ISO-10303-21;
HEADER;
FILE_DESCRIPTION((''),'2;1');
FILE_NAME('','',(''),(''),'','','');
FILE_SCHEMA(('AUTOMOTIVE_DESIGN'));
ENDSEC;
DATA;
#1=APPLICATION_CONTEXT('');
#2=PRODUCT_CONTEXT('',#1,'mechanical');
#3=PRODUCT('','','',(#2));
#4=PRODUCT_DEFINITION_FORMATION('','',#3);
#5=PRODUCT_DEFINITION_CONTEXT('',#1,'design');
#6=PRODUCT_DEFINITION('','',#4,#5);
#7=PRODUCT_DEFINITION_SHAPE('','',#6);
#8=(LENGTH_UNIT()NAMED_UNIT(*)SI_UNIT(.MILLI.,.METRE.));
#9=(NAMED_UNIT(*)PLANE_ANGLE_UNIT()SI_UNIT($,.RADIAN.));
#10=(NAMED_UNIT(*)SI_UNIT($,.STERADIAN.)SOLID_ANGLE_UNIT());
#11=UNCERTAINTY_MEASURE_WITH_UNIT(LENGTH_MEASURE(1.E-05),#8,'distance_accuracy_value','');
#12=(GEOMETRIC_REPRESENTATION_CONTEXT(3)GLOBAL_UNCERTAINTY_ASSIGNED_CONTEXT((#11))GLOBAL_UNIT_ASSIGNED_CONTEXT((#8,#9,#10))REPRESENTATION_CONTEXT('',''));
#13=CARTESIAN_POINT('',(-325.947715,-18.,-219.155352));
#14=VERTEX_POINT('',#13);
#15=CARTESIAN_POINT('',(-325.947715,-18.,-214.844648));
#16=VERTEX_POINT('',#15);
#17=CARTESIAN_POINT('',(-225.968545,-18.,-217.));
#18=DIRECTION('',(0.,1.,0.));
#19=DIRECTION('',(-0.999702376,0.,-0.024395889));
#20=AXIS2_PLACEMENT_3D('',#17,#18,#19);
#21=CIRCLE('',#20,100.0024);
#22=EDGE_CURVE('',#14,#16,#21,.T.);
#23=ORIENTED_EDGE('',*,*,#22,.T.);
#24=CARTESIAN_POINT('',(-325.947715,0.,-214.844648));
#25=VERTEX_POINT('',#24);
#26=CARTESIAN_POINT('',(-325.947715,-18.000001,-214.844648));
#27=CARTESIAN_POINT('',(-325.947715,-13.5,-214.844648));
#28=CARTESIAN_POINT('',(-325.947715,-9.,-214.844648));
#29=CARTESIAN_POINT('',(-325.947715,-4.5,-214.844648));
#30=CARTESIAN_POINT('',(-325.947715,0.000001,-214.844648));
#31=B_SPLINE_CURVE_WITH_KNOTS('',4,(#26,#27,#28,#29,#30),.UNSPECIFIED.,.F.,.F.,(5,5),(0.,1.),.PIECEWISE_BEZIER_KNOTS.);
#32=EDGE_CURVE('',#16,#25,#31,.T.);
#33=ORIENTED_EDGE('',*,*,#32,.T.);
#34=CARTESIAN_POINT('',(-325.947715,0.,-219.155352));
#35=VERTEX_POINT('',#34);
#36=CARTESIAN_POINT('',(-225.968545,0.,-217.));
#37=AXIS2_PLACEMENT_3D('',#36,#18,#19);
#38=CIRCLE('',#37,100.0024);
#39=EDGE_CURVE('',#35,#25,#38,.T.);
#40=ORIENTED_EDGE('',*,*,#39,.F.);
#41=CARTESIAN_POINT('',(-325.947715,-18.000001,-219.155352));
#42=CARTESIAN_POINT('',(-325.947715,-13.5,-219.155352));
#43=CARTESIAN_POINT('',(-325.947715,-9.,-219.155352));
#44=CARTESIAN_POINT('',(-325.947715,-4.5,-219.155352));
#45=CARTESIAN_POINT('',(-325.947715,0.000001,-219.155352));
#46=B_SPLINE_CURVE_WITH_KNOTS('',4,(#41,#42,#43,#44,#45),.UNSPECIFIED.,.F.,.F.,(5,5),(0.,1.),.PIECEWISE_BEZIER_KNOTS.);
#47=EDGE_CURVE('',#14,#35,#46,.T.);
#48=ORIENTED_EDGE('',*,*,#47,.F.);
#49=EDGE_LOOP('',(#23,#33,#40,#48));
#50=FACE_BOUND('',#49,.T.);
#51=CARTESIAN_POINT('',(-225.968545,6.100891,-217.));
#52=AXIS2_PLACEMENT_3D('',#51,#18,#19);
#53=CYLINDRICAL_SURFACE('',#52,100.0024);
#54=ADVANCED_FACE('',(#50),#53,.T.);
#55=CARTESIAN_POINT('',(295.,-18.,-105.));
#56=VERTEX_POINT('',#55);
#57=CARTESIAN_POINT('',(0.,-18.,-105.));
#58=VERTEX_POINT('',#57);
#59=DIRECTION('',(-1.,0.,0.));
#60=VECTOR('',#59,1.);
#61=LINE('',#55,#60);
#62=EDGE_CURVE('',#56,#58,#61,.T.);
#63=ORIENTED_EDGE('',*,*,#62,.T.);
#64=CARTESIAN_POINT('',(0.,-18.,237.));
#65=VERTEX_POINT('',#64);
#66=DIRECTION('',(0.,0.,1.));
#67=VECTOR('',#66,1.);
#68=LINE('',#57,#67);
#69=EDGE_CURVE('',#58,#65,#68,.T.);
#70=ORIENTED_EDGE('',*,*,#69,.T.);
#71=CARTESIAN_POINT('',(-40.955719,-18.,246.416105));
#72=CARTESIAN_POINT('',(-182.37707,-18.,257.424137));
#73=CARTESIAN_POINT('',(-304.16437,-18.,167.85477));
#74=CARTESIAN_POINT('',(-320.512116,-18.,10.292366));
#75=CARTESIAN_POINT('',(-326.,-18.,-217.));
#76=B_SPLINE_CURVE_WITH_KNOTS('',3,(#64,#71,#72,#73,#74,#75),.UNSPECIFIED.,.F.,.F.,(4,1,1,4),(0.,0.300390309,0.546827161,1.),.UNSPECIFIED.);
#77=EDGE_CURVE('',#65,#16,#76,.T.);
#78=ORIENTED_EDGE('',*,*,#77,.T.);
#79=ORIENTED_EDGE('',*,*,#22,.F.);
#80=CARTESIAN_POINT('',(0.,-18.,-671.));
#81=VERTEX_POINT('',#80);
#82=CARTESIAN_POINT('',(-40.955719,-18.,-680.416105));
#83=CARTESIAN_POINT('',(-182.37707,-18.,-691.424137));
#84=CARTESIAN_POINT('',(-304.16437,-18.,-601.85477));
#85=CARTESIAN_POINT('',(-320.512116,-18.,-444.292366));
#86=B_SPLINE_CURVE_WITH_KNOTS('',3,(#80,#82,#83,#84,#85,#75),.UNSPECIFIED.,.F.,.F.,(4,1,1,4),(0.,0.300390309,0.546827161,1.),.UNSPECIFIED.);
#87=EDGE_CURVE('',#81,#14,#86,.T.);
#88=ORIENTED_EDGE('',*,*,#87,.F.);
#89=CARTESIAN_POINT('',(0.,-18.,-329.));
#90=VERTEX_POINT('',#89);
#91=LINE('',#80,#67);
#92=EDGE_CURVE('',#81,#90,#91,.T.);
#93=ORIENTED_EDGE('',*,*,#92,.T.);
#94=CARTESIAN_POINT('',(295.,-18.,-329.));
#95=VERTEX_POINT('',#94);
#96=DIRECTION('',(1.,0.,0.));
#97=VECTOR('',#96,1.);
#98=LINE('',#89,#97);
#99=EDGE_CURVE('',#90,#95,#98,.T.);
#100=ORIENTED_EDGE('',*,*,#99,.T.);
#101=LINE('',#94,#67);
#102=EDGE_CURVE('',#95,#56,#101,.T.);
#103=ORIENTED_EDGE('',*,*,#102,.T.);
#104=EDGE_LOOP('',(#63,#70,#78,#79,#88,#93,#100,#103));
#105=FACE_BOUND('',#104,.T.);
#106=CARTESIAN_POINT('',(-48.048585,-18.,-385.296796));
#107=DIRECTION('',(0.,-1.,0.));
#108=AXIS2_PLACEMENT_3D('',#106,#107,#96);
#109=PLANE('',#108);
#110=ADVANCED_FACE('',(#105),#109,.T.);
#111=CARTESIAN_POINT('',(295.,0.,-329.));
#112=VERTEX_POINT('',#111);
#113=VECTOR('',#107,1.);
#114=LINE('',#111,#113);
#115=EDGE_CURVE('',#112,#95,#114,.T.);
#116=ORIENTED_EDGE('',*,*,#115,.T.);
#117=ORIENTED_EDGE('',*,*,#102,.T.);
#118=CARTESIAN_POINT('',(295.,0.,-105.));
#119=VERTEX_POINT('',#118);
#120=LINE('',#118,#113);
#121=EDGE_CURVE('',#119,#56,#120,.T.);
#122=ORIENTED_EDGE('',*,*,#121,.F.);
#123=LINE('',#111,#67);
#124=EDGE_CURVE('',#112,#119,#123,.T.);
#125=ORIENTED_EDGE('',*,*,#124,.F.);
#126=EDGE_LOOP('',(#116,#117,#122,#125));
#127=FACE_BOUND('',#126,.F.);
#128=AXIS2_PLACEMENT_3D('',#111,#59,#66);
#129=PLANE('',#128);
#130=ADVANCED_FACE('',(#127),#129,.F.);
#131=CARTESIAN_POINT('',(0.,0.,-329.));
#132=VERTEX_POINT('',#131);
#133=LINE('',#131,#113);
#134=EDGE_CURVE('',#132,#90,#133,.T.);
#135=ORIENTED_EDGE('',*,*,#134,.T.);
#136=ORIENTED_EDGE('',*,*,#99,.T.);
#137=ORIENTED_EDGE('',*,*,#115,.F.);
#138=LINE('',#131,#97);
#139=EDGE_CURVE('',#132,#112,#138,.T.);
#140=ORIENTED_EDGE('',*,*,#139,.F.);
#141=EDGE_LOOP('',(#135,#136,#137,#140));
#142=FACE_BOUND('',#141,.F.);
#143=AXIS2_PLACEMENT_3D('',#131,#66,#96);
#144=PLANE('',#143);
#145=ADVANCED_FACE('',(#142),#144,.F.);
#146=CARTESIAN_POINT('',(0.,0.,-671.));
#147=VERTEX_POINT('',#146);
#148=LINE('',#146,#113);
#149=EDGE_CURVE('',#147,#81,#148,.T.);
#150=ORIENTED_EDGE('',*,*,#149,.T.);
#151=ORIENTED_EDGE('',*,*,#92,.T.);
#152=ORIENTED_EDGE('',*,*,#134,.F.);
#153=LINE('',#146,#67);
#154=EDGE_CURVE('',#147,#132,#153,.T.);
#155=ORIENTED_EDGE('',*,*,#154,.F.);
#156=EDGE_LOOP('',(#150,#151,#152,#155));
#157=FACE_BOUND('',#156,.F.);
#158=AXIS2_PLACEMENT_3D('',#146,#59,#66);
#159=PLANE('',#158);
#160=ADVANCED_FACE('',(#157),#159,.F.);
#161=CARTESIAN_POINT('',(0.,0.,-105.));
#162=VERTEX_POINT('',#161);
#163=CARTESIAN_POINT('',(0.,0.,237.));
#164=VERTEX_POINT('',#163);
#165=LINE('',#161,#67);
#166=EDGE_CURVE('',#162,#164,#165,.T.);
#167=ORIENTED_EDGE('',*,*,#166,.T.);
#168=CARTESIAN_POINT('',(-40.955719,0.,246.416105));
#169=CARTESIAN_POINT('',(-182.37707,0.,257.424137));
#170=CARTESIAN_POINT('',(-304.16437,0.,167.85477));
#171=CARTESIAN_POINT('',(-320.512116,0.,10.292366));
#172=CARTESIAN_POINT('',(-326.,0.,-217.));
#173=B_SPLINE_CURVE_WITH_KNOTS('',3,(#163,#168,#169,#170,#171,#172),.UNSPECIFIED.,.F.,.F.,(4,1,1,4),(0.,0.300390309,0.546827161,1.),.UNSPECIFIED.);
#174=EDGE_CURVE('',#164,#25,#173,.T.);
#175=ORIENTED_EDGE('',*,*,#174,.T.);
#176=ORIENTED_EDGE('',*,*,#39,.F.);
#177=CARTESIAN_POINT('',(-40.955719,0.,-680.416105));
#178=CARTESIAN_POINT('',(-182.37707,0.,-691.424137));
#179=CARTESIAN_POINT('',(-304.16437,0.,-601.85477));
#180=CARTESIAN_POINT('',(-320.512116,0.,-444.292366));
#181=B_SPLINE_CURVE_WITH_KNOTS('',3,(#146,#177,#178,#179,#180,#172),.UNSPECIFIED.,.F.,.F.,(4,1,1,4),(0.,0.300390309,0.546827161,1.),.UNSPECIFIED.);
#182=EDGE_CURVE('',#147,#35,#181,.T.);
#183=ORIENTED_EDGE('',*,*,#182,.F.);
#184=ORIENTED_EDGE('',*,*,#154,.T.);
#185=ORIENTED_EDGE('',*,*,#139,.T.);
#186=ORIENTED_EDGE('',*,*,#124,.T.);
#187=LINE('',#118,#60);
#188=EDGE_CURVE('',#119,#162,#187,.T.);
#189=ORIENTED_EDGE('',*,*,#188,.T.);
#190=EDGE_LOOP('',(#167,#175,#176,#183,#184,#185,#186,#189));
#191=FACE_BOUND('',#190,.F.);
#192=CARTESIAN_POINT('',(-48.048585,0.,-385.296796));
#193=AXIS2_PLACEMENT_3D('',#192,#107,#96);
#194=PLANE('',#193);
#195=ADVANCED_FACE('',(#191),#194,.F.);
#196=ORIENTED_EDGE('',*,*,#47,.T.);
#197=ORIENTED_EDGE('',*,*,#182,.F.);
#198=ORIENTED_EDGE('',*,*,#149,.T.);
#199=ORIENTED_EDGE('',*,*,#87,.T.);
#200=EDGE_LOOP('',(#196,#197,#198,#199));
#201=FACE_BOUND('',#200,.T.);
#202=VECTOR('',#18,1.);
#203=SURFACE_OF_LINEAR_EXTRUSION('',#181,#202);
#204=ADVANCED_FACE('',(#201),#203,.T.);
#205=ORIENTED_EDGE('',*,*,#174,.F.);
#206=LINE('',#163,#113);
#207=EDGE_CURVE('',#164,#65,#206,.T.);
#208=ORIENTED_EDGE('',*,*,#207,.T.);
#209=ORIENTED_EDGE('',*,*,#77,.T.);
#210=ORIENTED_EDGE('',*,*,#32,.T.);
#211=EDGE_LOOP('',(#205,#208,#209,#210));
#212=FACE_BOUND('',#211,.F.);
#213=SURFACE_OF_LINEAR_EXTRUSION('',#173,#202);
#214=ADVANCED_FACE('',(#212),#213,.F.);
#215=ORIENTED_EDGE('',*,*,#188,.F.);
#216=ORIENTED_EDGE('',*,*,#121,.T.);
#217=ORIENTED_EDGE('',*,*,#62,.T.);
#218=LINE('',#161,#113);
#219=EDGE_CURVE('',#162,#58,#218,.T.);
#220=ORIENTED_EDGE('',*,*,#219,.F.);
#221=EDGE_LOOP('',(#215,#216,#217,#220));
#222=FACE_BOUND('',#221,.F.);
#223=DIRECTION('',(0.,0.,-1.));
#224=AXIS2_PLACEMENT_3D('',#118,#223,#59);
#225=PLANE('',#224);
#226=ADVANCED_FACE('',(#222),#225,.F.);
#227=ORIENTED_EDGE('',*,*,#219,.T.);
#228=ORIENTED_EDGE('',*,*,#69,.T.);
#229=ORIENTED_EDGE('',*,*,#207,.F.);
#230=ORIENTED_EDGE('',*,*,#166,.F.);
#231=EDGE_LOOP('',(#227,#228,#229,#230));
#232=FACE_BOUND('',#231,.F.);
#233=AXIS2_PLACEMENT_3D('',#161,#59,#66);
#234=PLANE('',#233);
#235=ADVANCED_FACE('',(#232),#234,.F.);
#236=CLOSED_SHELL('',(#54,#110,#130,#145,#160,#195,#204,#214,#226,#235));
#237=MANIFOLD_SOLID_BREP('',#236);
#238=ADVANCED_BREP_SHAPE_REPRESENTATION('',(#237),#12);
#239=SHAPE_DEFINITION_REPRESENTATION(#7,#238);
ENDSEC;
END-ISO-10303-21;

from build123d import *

# Parameters (mm, degrees)
F1_DEPTH    = 18
F2_T1_DEPTH = 30.2017817416


# Not quite as in the source:
# - a fillet or chamfer that OpenCascade refuses, or shapes differently, is made with other operations: its cross-section is extruded or revolved along the edge and cut away or added


with BuildPart() as f1:
    # F0 (on Front) → F1 (new body)
    with BuildSketch(Plane.XZ):
        with BuildLine():
            Line((295, -217), (-326, -217))
            add(Edge.make_bspline(
                [(0, -671), (-40.9557190503, -680.4161054833), (-182.3770697918, -691.4241372136), (-304.1643703394, -601.8547700973), (-320.5121159554, -444.292366147), (-326, -217)],
                knots=[0, 0, 0, 0, 0.3003903091, 0.5468271605, 1, 1, 1, 1], degree=3))
            Line((0, -671), (0, -329))
            Line((0, -329), (295, -329))
            Line((295, -329), (295, -217))
        make_face()
        with BuildLine():
            add(Edge.make_bspline(
                [(0, 237), (-40.9557190503, 246.4161054833), (-182.3770697918, 257.4241372136), (-304.1643703394, 167.8547700973), (-320.5121159554, 10.292366147), (-326, -217)],
                knots=[0, 0, 0, 0, 0.3003903091, 0.5468271605, 1, 1, 1, 1], degree=3))
            Line((-326, -217), (295, -217))
            Line((295, -217), (295, -105))
            Line((295, -105), (0, -105))
            Line((0, -105), (0, 237))
        make_face()
    extrude(amount=F1_DEPTH)

    # F2: fillet of radius 100 on 1 edges, made by hand

    # F2_s2 → F2_t1 (cut)
    with BuildSketch(Plane.XZ.offset(-6.1008908708)):
        with BuildLine():
            ThreePointArc((-325.941181539, -219.4396474121), (-325.9709446514, -217), (-325.941181539, -214.5603525879))
            Line((-325.941181539, -214.5603525879), (-335.9384452278, -214.3163878467))
            ThreePointArc((-335.9384452278, -214.3163878467), (-335.9677649192, -215.5375130178), (-335.9973263945, -216.7586185188))
            Line((-335.9973263945, -216.7586185188), (-335.9973263945, -217.2413814812))
            ThreePointArc((-335.9973263945, -217.2413814812), (-335.9677649192, -218.4624869822), (-335.9384452278, -219.6836121533))
            Line((-335.9384452278, -219.6836121533), (-325.941181539, -219.4396474121))
        make_face()
    extrude(amount=F2_T1_DEPTH, mode=Mode.SUBTRACT)


solid = f1.part
